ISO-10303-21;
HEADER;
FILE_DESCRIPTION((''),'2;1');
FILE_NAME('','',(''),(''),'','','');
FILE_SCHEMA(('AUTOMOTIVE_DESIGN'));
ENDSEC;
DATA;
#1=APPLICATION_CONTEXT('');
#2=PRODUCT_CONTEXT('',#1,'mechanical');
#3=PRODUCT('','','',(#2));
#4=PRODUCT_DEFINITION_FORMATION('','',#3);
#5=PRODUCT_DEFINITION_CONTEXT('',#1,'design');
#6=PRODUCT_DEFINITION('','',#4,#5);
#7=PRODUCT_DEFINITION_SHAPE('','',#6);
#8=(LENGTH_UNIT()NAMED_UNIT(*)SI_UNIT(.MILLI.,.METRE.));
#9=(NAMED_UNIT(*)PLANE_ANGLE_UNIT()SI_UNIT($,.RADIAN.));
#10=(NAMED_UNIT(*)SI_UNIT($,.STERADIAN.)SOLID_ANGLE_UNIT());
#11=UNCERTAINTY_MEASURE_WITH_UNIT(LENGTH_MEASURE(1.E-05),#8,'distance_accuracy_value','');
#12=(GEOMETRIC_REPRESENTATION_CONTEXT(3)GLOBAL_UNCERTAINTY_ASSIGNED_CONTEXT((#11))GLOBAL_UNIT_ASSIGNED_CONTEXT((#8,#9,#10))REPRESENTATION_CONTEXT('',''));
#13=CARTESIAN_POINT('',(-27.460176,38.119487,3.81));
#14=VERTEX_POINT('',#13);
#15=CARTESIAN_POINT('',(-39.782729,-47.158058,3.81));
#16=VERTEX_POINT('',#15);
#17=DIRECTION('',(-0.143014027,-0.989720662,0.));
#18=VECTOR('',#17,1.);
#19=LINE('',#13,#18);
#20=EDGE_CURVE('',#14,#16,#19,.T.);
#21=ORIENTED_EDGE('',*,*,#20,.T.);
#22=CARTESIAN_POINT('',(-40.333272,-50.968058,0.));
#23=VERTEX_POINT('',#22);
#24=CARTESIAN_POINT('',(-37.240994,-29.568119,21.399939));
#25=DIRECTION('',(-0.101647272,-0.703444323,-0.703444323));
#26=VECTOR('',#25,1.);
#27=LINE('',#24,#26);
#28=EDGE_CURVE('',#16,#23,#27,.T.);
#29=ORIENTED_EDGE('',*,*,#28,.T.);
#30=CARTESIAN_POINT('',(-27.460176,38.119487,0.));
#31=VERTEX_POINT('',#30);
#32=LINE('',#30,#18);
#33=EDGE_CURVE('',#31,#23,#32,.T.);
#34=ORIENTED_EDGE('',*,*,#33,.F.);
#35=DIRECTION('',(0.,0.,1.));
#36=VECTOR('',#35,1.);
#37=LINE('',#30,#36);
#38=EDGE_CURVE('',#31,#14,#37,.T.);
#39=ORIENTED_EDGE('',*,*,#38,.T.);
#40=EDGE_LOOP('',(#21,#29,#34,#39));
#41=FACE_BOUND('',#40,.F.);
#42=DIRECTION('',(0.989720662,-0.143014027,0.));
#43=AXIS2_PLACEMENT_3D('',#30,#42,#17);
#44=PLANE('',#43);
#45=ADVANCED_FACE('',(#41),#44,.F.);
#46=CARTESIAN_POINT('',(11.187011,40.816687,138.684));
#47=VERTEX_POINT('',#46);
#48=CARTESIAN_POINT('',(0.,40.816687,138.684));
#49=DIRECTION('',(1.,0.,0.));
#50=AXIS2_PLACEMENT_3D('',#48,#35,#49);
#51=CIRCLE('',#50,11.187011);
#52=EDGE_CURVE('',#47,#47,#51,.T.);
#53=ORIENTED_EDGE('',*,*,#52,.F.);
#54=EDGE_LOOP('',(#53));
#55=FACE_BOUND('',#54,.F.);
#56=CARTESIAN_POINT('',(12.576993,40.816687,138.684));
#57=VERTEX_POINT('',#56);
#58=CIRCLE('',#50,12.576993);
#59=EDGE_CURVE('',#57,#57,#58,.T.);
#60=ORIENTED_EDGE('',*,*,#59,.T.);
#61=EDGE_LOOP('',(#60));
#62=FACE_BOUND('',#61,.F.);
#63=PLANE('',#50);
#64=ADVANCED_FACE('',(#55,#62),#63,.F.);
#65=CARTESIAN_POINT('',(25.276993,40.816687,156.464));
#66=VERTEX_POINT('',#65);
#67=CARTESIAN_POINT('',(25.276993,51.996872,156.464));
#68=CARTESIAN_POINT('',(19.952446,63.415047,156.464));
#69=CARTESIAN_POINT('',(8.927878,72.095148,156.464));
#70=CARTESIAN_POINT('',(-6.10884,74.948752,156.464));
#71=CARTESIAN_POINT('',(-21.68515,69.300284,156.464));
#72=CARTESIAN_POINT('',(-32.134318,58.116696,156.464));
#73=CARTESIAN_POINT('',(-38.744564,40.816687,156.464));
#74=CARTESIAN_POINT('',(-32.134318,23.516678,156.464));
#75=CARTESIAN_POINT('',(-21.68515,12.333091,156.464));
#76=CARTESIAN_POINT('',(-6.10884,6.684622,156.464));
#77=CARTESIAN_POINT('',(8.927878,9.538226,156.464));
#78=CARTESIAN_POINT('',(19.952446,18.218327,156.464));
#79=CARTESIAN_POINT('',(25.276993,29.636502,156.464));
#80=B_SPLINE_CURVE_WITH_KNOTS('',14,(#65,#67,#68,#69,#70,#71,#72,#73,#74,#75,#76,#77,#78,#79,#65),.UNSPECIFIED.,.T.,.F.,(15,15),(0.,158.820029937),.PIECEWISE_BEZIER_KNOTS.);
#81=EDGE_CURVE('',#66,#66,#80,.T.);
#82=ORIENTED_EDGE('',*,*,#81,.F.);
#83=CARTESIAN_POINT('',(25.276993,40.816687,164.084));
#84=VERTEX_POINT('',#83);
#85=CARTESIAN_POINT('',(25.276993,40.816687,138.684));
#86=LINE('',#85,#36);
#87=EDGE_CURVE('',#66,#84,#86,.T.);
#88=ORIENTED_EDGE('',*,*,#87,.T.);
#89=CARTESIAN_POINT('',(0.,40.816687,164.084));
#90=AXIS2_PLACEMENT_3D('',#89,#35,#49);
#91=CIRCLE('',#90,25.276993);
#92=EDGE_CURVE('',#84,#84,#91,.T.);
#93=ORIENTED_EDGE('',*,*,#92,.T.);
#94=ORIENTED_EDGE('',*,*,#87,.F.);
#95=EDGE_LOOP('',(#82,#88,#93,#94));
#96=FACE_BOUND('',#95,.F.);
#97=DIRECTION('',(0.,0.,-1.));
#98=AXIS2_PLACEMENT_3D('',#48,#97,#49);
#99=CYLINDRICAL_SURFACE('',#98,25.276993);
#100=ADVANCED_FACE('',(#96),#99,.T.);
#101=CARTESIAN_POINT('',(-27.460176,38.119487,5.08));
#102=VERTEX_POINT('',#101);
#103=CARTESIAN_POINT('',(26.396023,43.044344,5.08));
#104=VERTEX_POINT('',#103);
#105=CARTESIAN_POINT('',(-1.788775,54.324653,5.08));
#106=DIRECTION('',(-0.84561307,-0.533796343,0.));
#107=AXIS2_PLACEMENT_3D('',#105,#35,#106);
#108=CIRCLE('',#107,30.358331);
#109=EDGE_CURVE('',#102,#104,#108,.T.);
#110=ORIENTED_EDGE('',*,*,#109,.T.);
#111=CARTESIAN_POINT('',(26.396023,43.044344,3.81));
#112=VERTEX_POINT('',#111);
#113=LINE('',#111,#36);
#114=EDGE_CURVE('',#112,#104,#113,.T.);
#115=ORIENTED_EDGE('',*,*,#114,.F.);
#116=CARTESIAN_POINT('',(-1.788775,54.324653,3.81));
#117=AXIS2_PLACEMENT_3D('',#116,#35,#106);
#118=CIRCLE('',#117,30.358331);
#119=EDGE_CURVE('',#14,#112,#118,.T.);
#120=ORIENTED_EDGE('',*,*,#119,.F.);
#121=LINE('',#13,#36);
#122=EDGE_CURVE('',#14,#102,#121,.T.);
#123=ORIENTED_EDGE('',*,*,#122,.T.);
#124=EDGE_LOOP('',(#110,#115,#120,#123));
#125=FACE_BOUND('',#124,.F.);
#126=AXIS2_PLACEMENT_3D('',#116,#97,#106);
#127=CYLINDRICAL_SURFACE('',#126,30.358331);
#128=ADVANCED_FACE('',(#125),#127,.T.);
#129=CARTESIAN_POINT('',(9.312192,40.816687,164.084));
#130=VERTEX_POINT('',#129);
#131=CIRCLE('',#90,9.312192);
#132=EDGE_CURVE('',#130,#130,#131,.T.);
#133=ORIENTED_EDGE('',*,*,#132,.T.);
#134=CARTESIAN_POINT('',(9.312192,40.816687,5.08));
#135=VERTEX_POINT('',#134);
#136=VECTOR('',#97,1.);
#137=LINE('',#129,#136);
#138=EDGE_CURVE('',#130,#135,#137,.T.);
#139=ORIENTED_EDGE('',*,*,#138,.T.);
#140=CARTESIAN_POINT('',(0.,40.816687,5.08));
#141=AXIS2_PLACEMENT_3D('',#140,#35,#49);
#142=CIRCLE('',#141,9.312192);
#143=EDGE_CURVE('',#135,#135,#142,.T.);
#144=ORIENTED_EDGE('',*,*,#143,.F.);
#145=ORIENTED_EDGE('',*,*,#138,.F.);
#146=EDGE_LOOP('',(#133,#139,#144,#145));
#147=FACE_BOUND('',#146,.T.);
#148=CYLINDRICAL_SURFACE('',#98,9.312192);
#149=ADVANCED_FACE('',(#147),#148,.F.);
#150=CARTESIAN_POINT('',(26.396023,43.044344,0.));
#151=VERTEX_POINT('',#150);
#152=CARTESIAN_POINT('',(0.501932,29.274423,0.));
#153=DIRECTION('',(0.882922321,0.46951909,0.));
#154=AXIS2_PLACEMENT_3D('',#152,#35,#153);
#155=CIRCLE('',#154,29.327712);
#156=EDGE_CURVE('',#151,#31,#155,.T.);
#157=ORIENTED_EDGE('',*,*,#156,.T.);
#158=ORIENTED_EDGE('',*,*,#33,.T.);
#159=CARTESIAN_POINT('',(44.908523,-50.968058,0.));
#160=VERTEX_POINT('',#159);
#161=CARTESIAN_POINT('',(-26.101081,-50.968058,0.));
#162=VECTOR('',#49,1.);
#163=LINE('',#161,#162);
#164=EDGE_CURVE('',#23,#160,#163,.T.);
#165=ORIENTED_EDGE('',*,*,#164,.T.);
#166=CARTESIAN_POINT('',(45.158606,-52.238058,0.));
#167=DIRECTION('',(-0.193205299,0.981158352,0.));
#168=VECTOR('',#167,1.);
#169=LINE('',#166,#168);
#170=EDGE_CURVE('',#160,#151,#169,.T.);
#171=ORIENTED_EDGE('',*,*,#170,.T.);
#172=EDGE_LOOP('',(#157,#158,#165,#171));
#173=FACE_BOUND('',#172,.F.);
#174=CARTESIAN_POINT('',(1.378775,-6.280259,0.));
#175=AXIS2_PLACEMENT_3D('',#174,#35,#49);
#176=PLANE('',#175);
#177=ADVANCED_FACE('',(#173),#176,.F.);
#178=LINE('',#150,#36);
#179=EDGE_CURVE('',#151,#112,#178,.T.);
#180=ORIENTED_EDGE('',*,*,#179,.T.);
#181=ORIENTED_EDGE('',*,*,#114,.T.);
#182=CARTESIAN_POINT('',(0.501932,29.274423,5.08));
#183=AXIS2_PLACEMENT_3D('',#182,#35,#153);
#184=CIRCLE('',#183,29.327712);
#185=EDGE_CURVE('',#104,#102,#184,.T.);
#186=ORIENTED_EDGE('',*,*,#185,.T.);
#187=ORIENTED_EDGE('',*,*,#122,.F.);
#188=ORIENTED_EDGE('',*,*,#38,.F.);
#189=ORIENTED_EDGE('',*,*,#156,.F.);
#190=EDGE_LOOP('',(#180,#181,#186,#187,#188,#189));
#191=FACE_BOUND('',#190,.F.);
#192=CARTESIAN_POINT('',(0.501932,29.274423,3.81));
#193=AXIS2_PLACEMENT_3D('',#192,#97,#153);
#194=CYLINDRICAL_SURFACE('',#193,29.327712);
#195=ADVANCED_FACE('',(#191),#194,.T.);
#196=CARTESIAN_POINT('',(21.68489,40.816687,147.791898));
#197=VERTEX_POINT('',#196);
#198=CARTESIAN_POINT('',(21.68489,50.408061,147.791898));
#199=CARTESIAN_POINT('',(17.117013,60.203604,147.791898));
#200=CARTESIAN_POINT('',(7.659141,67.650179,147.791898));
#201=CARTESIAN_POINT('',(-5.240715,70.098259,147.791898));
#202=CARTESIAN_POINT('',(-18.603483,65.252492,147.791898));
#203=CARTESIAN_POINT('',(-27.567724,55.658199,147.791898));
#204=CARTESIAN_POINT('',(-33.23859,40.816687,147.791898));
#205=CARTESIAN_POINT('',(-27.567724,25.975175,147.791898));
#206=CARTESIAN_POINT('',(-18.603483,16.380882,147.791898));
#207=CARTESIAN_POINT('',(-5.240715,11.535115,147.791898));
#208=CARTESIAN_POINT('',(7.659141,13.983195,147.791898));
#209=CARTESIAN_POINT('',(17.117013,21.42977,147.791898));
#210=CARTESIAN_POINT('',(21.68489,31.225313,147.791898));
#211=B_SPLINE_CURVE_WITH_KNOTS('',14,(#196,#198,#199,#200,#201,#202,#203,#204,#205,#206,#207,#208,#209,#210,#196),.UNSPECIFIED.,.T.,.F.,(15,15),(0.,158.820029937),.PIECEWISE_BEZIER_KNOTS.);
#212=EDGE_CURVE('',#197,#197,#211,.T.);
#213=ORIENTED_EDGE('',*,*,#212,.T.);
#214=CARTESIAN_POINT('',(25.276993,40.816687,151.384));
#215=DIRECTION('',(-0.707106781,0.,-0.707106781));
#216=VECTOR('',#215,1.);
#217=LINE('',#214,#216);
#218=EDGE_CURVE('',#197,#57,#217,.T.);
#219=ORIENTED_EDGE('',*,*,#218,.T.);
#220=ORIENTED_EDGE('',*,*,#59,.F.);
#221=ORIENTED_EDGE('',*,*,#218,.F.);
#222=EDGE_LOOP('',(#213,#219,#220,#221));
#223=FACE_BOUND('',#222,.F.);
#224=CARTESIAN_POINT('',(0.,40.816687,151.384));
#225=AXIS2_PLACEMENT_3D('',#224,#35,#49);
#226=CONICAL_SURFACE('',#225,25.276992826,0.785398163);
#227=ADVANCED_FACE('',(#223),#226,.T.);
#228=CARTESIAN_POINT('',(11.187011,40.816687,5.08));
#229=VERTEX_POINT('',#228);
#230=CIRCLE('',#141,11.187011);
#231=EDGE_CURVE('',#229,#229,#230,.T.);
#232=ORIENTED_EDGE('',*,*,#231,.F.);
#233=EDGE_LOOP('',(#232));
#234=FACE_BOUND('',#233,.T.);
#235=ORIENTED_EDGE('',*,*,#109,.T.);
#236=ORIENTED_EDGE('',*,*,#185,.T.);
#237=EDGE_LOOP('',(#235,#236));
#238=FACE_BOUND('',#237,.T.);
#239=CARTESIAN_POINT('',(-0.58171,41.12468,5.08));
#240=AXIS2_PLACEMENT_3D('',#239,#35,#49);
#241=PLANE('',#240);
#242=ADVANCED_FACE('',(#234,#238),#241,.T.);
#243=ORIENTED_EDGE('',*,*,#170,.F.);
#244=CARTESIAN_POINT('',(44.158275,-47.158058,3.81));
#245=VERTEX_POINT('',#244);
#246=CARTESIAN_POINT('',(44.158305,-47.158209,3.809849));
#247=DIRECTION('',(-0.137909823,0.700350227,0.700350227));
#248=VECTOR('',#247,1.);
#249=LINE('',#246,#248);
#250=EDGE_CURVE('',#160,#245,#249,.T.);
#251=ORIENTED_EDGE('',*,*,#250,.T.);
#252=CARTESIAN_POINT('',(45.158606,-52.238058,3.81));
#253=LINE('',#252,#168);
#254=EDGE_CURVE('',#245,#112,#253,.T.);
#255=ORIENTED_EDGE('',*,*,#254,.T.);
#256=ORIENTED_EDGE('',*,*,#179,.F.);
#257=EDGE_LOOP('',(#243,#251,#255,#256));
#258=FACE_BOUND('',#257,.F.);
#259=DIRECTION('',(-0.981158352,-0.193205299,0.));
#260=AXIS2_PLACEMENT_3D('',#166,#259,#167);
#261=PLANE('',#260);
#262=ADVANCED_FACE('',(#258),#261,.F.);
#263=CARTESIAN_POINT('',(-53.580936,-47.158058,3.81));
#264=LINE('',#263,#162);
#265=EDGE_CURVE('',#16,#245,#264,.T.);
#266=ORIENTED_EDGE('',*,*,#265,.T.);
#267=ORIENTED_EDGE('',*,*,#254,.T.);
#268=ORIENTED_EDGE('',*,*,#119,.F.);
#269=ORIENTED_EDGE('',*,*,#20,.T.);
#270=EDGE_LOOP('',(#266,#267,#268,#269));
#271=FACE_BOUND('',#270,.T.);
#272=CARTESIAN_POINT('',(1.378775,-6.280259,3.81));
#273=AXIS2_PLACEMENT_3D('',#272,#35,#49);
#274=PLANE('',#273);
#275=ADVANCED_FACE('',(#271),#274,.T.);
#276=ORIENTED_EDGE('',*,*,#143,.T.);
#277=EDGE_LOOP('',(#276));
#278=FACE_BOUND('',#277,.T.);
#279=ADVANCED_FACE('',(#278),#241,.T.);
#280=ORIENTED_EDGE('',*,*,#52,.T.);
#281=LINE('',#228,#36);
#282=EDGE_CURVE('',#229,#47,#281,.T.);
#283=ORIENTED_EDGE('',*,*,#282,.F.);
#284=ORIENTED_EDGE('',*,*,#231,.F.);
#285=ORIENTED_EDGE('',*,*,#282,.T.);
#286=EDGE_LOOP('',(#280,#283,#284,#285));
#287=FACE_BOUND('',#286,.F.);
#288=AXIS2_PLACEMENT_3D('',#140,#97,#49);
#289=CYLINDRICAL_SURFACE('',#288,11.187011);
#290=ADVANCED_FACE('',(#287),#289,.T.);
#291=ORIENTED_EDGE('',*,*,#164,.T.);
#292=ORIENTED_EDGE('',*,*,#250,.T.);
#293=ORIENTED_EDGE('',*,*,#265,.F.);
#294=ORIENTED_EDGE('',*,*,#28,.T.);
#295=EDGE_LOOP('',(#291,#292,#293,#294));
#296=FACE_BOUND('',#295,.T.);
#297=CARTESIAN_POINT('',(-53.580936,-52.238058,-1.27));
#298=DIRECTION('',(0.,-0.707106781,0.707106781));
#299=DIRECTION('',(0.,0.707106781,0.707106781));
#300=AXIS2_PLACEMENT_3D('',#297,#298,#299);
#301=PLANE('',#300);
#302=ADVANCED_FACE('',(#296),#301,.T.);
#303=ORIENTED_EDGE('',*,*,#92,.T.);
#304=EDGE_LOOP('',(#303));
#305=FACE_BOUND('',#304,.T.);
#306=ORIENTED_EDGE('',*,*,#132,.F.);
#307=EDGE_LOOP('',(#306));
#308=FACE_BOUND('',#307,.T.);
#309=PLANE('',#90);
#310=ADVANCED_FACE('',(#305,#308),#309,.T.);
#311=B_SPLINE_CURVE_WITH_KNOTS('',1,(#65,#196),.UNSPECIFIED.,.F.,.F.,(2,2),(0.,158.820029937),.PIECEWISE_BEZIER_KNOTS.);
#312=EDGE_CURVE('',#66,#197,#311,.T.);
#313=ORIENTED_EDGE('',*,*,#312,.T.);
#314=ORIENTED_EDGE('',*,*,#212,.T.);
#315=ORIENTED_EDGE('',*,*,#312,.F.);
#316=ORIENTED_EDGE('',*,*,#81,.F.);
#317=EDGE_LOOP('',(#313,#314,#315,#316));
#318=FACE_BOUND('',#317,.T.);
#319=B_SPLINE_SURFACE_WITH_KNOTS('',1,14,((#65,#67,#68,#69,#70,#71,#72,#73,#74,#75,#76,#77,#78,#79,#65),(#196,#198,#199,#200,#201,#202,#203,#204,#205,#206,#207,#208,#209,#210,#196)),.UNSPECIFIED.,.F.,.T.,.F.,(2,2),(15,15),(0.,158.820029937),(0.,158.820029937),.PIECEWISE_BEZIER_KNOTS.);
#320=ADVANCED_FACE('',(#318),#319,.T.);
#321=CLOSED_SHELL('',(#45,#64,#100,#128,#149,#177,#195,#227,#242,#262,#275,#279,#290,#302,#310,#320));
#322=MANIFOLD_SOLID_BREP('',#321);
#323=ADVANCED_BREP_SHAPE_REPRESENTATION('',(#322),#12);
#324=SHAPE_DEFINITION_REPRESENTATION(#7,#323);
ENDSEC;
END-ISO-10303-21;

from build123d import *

# Parameters (mm, degrees)
F1_DEPTH    = 3.81
F3_T1_DEPTH = 111.8036914576
F4_DEPTH    = 1.27
F5_R        = 11.1870112164
F5_R_2      = 9.3121919152
F6_DEPTH    = 133.604
F7_R        = 25.2769928265
F7_R_2      = 11.1870112164
F7_R_3      = 9.3121919152
F8_DEPTH    = 25.4
F9_SIZE     = 12.7
F10_SIZE    = 5.08


# Not quite as in the source:
# - a fillet or chamfer that OpenCascade refuses, or shapes differently, is made with other operations: its cross-section is extruded or revolved along the edge and cut away or added


with BuildPart() as f1:
    # F0 (on Top) → F1 (new body)
    with BuildSketch(Plane.XY):
        with BuildLine():
            Line((45.1586060226, -52.2380582988), (26.3960231096, 43.0443435907))
            ThreePointArc((26.3960231096, 43.0443435907), (-2.1687844347, 58.4802777375), (-27.4601764977, 38.1194874644))
            Line((-27.4601764977, 38.1194874644), (-40.5167862773, -52.2380582988))
            Line((-40.5167862773, -52.2380582988), (45.1586060226, -52.2380582988))
        make_face()
    extrude(amount=F1_DEPTH)

    # F3: chamfer of 5.08 on 1 edges, made by hand

    # F3_s2 → F3_t1 (cut)
    with BuildSketch(Plane.YZ.offset(-53.5809358562)):
        Polygon((-52.2380582988, -1.27), (-47.1580582988, 3.81), (-52.2380582988, 3.81), align=None)
    extrude(amount=F3_T1_DEPTH, mode=Mode.SUBTRACT)

    # F2 (on face) → F4 (join)
    with BuildSketch(Plane.XY.offset(3.81)):
        with BuildLine():
            ThreePointArc((26.3960231096, 43.0443435907), (-2.1687844347, 58.4802777375), (-27.4601764977, 38.1194874644))
            ThreePointArc((-27.4601764977, 38.1194874644), (0.9757940306, 24.0924618975), (26.3960231096, 43.0443435907))
        make_face()
    extrude(amount=F4_DEPTH)

    # F5 (on face) → F6 (join)
    with BuildSketch(Plane.XY.offset(5.08)):
        with Locations((0, 40.8166870475)):
            Circle(F5_R)
        with Locations((0, 40.8166870475)):
            Circle(F5_R_2, mode=Mode.SUBTRACT)
    extrude(amount=F6_DEPTH)

    # F7 (on face) → F8 (join)
    with BuildSketch(Plane.XY.offset(138.684)):
        with Locations((0, 40.8166870475)):
            Circle(F7_R)
        with Locations((0, 40.8166870475)):
            Circle(F7_R_2, mode=Mode.SUBTRACT)
        with Locations((0, 40.8166870475)):
            Circle(F7_R_2)
        with Locations((0, 40.8166870475)):
            Circle(F7_R_3, mode=Mode.SUBTRACT)
    extrude(amount=F8_DEPTH)

    # F9
    f9_edges = [f1.edges().sort_by_distance(p)[0] for p in [
        (-25.276993, 40.816687, 138.684),
    ]]
    chamfer(f9_edges, length=F9_SIZE)

    # F10
    f10_edges = [f1.edges().sort_by_distance(p)[0] for p in [
        (-25.276993, 40.816687, 151.384),
    ]]
    chamfer(f10_edges, length=F10_SIZE)


solid = f1.part
